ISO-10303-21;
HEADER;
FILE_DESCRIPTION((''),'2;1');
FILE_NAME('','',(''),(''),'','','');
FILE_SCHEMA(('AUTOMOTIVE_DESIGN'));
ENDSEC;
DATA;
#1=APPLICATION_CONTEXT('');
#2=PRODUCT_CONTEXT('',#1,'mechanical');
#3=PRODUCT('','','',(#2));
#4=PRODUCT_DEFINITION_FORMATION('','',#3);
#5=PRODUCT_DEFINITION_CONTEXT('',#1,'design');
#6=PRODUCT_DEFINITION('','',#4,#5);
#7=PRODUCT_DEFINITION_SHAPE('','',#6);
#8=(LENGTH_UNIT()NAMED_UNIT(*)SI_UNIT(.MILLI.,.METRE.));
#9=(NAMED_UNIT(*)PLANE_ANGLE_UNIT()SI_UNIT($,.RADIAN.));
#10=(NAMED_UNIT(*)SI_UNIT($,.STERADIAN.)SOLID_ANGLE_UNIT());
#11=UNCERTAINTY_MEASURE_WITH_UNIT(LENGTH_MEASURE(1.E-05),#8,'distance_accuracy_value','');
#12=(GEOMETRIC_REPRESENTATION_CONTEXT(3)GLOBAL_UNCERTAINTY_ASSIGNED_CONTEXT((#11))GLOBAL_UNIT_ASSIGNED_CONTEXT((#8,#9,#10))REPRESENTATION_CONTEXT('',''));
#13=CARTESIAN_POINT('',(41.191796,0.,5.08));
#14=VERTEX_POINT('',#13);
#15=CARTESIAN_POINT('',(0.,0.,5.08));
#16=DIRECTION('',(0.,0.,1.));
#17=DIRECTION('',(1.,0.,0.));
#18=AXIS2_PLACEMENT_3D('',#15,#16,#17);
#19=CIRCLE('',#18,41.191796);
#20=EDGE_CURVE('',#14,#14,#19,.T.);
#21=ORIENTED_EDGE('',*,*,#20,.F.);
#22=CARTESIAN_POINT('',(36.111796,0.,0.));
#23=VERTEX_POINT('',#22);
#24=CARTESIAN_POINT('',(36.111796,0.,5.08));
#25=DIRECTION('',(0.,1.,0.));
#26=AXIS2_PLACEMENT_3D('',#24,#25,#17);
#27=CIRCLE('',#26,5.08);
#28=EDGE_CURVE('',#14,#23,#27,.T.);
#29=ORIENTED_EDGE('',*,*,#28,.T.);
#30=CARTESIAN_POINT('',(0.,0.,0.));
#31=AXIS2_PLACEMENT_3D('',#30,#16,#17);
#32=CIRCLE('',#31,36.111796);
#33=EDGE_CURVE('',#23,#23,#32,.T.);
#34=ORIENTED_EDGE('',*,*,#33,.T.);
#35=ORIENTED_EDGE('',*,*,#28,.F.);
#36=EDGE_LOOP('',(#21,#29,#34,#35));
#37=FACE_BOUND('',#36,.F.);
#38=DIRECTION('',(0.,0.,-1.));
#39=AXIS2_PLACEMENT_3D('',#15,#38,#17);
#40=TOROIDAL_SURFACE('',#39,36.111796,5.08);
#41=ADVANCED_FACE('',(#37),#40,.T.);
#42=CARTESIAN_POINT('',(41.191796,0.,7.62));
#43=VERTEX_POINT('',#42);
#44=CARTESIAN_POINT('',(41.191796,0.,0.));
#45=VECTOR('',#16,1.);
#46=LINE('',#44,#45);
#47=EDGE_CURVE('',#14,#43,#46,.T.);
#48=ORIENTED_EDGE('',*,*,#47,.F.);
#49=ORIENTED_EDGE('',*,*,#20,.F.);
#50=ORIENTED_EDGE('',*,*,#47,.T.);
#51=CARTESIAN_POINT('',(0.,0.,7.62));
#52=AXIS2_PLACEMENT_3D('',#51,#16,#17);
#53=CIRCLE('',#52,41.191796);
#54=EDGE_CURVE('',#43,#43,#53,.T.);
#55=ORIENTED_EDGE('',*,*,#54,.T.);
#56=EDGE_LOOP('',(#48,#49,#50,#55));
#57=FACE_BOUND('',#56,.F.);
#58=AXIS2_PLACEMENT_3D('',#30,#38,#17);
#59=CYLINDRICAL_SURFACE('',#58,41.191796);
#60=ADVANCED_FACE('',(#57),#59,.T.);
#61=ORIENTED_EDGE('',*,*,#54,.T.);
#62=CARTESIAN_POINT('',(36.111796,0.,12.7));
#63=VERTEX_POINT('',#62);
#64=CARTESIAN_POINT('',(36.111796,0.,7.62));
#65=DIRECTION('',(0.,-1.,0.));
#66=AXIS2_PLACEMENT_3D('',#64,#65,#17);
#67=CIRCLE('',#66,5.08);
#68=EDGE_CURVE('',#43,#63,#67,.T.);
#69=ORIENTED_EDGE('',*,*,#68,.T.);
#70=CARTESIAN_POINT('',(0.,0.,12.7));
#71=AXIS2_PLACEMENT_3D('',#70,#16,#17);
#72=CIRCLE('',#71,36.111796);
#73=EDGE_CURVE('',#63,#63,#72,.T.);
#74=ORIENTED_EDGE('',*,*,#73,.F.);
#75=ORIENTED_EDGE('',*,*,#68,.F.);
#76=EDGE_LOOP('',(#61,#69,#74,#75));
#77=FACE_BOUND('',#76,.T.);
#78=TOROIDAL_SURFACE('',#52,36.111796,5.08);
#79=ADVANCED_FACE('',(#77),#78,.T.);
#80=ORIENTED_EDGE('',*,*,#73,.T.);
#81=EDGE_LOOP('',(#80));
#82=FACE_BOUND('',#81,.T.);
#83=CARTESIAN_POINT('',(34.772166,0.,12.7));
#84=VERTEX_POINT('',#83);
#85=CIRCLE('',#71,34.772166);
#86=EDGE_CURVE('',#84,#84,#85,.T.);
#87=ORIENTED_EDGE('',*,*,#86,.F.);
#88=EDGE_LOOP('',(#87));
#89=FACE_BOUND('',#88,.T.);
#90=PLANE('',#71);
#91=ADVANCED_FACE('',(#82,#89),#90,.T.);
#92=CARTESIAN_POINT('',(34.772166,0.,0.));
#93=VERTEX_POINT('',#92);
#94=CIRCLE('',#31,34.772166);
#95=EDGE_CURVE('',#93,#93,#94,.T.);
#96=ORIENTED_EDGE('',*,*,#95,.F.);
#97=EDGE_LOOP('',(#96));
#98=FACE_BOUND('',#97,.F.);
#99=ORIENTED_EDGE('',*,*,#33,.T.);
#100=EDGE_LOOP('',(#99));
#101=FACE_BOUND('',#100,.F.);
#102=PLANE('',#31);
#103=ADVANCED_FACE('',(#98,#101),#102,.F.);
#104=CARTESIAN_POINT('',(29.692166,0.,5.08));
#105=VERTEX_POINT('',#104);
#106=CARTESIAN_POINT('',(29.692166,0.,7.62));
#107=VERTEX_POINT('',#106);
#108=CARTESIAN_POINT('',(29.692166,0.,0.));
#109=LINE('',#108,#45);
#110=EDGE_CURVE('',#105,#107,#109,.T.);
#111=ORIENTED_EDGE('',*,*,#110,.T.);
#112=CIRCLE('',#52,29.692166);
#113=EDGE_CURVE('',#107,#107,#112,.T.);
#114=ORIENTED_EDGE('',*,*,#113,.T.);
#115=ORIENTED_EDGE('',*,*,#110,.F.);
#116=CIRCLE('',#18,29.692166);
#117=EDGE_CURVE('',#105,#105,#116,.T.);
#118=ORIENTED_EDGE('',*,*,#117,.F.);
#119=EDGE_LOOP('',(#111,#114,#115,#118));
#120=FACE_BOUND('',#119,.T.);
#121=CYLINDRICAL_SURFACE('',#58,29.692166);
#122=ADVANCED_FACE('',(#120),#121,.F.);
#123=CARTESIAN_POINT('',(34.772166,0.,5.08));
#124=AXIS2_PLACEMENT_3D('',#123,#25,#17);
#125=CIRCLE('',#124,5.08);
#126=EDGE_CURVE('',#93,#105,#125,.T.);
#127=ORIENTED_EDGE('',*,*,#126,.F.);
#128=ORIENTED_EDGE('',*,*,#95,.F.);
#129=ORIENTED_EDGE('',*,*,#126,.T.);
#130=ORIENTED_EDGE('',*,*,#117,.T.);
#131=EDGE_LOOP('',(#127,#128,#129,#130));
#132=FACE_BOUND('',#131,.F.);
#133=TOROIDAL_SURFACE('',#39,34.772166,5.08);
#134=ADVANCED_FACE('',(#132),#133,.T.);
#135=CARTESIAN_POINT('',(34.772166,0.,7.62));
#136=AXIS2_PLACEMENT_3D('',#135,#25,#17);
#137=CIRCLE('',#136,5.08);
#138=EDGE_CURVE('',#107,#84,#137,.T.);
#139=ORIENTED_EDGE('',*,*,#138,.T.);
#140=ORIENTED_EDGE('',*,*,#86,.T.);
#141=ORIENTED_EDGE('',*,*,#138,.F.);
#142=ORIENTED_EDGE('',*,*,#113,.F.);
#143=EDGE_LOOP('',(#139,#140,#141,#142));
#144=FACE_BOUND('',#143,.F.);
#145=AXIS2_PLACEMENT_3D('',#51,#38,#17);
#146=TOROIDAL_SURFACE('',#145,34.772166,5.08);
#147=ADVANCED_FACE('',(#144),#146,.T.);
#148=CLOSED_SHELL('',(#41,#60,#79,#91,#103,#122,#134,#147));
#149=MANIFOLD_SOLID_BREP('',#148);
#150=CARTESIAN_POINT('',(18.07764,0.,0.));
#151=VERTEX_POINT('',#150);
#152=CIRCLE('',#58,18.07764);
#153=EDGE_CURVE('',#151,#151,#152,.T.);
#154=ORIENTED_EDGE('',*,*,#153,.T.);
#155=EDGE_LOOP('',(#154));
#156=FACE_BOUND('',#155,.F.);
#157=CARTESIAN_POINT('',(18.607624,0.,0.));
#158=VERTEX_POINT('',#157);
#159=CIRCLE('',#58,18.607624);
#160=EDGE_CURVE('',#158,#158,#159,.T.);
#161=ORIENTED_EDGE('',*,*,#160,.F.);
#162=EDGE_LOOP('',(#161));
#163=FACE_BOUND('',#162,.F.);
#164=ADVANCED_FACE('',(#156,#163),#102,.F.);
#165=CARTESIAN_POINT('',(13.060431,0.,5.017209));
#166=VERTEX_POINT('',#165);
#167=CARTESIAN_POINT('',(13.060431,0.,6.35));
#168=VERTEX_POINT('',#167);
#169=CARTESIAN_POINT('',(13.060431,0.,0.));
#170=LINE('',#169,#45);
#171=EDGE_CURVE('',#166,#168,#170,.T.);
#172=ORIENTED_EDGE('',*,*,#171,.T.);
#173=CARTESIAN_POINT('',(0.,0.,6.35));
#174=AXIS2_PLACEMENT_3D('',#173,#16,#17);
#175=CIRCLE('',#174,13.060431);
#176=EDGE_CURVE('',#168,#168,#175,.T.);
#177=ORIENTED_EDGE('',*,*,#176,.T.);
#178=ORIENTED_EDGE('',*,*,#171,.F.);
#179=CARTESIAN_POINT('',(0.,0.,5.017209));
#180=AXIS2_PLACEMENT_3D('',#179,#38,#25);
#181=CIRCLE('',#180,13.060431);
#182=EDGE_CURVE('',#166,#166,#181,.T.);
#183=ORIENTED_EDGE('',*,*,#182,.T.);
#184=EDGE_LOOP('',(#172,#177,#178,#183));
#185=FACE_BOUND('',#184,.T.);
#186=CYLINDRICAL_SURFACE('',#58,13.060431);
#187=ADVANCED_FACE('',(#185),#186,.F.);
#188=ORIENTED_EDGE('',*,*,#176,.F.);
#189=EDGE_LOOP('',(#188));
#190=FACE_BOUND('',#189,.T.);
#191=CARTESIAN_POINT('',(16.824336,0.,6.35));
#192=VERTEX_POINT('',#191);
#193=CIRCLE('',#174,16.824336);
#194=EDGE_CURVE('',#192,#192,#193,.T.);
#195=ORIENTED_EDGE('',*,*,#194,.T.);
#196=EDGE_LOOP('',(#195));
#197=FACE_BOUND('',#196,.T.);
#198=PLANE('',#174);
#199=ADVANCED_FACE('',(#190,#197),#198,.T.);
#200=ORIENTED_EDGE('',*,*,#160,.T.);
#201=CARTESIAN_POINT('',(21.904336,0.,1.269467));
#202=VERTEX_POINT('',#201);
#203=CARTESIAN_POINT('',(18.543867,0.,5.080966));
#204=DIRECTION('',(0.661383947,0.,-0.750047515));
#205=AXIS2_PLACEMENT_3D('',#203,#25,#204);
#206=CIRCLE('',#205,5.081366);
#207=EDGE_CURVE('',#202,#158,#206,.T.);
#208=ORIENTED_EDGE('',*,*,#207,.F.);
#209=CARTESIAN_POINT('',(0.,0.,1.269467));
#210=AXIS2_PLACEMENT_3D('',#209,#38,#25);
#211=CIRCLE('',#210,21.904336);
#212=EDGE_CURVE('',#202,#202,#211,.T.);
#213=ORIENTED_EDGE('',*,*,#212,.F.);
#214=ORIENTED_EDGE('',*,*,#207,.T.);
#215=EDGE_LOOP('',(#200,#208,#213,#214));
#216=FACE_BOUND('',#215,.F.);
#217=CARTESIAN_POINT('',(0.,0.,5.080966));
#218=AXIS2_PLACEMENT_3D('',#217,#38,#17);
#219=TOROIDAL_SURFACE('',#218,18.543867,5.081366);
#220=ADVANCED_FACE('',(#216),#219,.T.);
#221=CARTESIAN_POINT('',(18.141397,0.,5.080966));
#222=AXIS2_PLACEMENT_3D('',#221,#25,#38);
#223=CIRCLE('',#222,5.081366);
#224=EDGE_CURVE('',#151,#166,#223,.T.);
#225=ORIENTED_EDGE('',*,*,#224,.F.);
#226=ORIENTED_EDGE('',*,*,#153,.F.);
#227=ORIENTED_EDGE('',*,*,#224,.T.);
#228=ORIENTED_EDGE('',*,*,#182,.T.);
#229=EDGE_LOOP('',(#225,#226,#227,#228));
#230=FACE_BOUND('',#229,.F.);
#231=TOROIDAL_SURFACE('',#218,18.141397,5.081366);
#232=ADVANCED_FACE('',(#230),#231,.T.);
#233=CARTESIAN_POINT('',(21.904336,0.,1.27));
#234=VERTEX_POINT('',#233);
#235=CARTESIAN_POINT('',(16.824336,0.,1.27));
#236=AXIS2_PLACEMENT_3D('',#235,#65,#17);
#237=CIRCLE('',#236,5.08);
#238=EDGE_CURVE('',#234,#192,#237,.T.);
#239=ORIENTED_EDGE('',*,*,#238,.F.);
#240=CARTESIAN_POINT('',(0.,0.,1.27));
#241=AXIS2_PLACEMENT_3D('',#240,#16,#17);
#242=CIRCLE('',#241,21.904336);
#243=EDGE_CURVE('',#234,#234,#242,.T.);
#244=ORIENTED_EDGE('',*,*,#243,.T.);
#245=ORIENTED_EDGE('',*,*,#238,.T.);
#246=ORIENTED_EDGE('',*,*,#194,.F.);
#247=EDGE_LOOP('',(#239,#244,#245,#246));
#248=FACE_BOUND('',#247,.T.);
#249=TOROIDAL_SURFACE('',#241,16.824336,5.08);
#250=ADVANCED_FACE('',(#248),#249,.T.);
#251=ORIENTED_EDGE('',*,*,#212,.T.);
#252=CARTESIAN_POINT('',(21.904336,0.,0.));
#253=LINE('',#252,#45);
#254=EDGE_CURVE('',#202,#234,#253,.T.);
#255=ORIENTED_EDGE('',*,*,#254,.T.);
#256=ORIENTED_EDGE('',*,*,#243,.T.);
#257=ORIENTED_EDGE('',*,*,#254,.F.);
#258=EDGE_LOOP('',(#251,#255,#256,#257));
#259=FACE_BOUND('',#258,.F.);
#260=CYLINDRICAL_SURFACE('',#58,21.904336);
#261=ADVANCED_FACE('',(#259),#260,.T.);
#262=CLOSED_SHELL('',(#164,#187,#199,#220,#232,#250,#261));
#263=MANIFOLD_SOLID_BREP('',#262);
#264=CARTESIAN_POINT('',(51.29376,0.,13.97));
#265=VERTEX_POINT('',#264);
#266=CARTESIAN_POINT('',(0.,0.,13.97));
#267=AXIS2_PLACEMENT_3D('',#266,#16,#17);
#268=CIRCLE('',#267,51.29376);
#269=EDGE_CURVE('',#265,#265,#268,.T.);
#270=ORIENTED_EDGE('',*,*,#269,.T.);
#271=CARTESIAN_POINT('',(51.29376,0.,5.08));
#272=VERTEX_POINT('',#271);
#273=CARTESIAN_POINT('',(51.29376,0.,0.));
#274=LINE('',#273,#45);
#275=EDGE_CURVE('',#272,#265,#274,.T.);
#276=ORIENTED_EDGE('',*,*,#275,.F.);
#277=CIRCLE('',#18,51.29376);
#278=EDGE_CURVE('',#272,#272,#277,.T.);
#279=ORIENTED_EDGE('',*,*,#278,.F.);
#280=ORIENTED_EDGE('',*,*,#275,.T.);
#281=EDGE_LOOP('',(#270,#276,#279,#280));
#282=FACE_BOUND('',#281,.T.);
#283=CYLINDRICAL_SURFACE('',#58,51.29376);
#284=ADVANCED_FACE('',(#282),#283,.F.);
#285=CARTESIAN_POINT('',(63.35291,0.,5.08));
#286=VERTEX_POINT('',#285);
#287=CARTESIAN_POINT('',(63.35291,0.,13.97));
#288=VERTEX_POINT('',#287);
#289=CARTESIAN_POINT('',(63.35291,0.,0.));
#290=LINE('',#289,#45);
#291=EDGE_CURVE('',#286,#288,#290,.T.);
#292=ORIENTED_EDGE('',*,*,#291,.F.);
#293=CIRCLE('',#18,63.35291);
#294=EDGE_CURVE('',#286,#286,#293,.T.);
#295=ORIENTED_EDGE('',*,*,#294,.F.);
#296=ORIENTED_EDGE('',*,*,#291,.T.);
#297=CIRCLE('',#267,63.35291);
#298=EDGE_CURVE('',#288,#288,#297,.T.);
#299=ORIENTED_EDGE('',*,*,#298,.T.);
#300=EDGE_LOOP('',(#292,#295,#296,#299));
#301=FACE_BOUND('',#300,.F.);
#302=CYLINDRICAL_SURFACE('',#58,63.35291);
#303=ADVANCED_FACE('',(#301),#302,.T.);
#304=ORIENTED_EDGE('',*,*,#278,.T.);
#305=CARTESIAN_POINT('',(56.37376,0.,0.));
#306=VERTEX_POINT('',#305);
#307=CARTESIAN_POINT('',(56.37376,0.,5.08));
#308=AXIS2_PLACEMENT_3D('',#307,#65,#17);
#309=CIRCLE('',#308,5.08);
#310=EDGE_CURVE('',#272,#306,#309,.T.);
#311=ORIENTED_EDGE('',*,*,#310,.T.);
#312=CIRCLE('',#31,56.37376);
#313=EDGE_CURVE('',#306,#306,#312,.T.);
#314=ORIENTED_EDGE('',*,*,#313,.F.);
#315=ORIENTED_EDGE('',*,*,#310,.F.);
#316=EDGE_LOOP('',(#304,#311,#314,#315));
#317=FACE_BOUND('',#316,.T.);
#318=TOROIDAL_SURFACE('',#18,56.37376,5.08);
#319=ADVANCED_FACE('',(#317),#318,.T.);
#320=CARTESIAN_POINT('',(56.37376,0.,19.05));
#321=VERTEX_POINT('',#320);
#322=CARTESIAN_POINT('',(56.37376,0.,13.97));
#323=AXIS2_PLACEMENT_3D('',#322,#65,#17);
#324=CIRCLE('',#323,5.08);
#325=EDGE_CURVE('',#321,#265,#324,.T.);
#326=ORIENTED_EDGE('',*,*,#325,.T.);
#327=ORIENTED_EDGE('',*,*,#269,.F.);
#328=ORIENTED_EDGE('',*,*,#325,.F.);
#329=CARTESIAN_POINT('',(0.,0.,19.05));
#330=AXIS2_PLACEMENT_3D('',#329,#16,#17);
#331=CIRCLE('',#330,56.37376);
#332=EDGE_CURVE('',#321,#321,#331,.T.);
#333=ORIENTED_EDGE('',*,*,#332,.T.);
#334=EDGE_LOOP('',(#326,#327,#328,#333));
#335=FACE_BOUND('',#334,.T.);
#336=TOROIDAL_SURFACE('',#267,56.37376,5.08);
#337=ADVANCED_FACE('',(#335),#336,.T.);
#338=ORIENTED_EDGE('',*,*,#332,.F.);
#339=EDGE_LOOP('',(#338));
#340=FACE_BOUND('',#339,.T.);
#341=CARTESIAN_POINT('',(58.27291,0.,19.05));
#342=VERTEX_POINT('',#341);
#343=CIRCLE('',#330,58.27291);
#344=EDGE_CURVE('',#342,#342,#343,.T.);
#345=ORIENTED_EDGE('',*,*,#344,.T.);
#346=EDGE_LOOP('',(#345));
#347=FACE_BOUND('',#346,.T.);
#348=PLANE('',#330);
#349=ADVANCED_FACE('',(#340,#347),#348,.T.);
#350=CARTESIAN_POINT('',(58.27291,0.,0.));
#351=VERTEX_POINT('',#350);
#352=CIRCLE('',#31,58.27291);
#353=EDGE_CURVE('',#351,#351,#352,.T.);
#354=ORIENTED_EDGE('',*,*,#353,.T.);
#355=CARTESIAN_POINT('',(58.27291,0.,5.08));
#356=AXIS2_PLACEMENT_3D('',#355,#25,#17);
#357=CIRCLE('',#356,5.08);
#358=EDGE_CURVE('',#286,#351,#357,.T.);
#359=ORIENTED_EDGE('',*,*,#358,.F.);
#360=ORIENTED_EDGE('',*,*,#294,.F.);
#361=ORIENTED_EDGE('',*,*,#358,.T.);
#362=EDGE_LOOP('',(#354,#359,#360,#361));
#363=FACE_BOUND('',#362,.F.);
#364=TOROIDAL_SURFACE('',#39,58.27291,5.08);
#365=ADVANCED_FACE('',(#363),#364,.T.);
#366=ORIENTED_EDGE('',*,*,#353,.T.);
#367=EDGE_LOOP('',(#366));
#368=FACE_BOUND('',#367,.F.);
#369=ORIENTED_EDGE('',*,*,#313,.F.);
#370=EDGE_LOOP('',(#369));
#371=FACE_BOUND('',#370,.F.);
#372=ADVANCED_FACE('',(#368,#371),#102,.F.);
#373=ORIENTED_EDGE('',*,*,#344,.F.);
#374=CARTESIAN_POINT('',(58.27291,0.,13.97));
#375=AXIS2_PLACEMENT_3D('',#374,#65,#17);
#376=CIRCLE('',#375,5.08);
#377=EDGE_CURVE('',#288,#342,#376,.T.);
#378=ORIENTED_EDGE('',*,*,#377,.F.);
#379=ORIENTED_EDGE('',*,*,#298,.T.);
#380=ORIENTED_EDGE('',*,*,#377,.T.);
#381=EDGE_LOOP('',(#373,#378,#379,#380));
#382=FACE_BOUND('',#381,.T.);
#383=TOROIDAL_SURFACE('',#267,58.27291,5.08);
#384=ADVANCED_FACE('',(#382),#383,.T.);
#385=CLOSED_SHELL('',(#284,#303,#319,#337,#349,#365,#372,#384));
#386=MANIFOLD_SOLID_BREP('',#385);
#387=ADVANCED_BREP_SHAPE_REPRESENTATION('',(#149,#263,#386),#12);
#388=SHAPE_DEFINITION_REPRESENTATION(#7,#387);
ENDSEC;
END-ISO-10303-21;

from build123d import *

# Parameters (mm, degrees)
F0_R      = 21.9043363511
F0_R_2    = 13.0604308997
F1_DEPTH  = 6.35
F2_R      = 5.08
F4_R      = 41.1917956684
F4_R_2    = 29.6921655886
F5_DEPTH  = 12.7
F6_R      = 5.08
F7_R      = 5.08
F8_R      = 5.08
F9_R      = 63.3529102605
F9_R_2    = 51.2937601989
F10_DEPTH = 19.05
F11_R     = 5.08
F12_R     = 5.08


# Not quite as in the source:
# - a fillet or chamfer that OpenCascade refuses, or shapes differently, is made with other operations: its cross-section is extruded or revolved along the edge and cut away or added


with BuildPart() as f1:
    # F0 (on Top) → F1 (new body)
    with BuildSketch(Plane.XY):
        Circle(F0_R)
        Circle(F0_R_2, mode=Mode.SUBTRACT)
    extrude(amount=F1_DEPTH)

    # F2
    f2_edges = [f1.edges().sort_by_distance(p)[0] for p in [
        (-21.904336, 0, 6.35),
    ]]
    fillet(f2_edges, radius=F2_R)

    # F3: fillet of radius 5.08 on 2 edges, made by hand

    # F3_s1 → F3_t2 (revolve, cut)
    with BuildSketch(Plane.XZ):
        with BuildLine():
            ThreePointArc((21.9046009047, 1.269699981), (20.3402305458, 0.3277187953), (18.5438672111, -0.0004))
            Line((18.5438672111, -0.0004), (18.5438672111, -0.5085365685))
            ThreePointArc((18.5438672111, -0.5085365685), (20.2241017811, -0.5081365685), (21.9043363511, -0.5081365685))
            Line((21.9043363511, -0.5081365685), (22.4124729197, 0))
            ThreePointArc((22.4124729197, 0), (22.4124729197, 0.6348499905), (22.2406742741, 0.8885734106))
            Line((22.2406742741, 0.8885734106), (21.9046009047, 1.269699981))
        make_face()
    revolve(axis=Axis((0, 0, 0), (0, 0, 1)), mode=Mode.SUBTRACT)

    # F3_s3 → F3_t4 (revolve, cut)
    with BuildSketch(Plane.XZ):
        with BuildLine():
            ThreePointArc((18.1413965851, -0.0004), (14.5483284513, 1.4878975516), (13.0600308997, 5.0809656854))
            Line((13.0600308997, 5.0809656854), (12.5518943312, 5.0809656854))
            ThreePointArc((12.5518943312, 5.0809656854), (12.5522943312, 2.5404828427), (12.5522943312, 0))
            Line((12.5522943312, 0), (13.0604308997, -0.5081365685))
            ThreePointArc((13.0604308997, -0.5081365685), (15.6009137424, -0.5081365685), (18.1413965851, -0.5085365685))
            Line((18.1413965851, -0.5085365685), (18.1413965851, -0.0004))
        make_face()
    revolve(axis=Axis((0, 0, 0), (0, 0, 1)), mode=Mode.SUBTRACT)


with BuildPart() as f5:
    # F4 (on Top) → F5 (new body)
    with BuildSketch(Plane.XY):
        Circle(F4_R)
        Circle(F4_R_2, mode=Mode.SUBTRACT)
    extrude(amount=F5_DEPTH)

    # F6
    f6_edges = [f5.edges().sort_by_distance(p)[0] for p in [
        (-41.191796, 0, 0),
    ]]
    fillet(f6_edges, radius=F6_R)

    # F7
    f7_edges = [f5.edges().sort_by_distance(p)[0] for p in [
        (-29.692166, 0, 0),
    ]]
    fillet(f7_edges, radius=F7_R)

    # F8
    f8_edges = [f5.edges().sort_by_distance(p)[0] for p in [
        (-41.191796, 0, 12.7),
        (-29.692166, 0, 12.7),
    ]]
    fillet(f8_edges, radius=F8_R)


with BuildPart() as f10:
    # F9 (on Top) → F10 (new body)
    with BuildSketch(Plane.XY):
        Circle(F9_R)
        Circle(F9_R_2, mode=Mode.SUBTRACT)
    extrude(amount=F10_DEPTH)

    # F11
    f11_edges = [f10.edges().sort_by_distance(p)[0] for p in [
        (-63.35291, 0, 0),
        (-51.29376, 0, 0),
    ]]
    fillet(f11_edges, radius=F11_R)

    # F12
    f12_edges = [f10.edges().sort_by_distance(p)[0] for p in [
        (-63.35291, 0, 19.05),
        (-51.29376, 0, 19.05),
    ]]
    fillet(f12_edges, radius=F12_R)


solid = Compound([f1.part, f5.part, f10.part])
